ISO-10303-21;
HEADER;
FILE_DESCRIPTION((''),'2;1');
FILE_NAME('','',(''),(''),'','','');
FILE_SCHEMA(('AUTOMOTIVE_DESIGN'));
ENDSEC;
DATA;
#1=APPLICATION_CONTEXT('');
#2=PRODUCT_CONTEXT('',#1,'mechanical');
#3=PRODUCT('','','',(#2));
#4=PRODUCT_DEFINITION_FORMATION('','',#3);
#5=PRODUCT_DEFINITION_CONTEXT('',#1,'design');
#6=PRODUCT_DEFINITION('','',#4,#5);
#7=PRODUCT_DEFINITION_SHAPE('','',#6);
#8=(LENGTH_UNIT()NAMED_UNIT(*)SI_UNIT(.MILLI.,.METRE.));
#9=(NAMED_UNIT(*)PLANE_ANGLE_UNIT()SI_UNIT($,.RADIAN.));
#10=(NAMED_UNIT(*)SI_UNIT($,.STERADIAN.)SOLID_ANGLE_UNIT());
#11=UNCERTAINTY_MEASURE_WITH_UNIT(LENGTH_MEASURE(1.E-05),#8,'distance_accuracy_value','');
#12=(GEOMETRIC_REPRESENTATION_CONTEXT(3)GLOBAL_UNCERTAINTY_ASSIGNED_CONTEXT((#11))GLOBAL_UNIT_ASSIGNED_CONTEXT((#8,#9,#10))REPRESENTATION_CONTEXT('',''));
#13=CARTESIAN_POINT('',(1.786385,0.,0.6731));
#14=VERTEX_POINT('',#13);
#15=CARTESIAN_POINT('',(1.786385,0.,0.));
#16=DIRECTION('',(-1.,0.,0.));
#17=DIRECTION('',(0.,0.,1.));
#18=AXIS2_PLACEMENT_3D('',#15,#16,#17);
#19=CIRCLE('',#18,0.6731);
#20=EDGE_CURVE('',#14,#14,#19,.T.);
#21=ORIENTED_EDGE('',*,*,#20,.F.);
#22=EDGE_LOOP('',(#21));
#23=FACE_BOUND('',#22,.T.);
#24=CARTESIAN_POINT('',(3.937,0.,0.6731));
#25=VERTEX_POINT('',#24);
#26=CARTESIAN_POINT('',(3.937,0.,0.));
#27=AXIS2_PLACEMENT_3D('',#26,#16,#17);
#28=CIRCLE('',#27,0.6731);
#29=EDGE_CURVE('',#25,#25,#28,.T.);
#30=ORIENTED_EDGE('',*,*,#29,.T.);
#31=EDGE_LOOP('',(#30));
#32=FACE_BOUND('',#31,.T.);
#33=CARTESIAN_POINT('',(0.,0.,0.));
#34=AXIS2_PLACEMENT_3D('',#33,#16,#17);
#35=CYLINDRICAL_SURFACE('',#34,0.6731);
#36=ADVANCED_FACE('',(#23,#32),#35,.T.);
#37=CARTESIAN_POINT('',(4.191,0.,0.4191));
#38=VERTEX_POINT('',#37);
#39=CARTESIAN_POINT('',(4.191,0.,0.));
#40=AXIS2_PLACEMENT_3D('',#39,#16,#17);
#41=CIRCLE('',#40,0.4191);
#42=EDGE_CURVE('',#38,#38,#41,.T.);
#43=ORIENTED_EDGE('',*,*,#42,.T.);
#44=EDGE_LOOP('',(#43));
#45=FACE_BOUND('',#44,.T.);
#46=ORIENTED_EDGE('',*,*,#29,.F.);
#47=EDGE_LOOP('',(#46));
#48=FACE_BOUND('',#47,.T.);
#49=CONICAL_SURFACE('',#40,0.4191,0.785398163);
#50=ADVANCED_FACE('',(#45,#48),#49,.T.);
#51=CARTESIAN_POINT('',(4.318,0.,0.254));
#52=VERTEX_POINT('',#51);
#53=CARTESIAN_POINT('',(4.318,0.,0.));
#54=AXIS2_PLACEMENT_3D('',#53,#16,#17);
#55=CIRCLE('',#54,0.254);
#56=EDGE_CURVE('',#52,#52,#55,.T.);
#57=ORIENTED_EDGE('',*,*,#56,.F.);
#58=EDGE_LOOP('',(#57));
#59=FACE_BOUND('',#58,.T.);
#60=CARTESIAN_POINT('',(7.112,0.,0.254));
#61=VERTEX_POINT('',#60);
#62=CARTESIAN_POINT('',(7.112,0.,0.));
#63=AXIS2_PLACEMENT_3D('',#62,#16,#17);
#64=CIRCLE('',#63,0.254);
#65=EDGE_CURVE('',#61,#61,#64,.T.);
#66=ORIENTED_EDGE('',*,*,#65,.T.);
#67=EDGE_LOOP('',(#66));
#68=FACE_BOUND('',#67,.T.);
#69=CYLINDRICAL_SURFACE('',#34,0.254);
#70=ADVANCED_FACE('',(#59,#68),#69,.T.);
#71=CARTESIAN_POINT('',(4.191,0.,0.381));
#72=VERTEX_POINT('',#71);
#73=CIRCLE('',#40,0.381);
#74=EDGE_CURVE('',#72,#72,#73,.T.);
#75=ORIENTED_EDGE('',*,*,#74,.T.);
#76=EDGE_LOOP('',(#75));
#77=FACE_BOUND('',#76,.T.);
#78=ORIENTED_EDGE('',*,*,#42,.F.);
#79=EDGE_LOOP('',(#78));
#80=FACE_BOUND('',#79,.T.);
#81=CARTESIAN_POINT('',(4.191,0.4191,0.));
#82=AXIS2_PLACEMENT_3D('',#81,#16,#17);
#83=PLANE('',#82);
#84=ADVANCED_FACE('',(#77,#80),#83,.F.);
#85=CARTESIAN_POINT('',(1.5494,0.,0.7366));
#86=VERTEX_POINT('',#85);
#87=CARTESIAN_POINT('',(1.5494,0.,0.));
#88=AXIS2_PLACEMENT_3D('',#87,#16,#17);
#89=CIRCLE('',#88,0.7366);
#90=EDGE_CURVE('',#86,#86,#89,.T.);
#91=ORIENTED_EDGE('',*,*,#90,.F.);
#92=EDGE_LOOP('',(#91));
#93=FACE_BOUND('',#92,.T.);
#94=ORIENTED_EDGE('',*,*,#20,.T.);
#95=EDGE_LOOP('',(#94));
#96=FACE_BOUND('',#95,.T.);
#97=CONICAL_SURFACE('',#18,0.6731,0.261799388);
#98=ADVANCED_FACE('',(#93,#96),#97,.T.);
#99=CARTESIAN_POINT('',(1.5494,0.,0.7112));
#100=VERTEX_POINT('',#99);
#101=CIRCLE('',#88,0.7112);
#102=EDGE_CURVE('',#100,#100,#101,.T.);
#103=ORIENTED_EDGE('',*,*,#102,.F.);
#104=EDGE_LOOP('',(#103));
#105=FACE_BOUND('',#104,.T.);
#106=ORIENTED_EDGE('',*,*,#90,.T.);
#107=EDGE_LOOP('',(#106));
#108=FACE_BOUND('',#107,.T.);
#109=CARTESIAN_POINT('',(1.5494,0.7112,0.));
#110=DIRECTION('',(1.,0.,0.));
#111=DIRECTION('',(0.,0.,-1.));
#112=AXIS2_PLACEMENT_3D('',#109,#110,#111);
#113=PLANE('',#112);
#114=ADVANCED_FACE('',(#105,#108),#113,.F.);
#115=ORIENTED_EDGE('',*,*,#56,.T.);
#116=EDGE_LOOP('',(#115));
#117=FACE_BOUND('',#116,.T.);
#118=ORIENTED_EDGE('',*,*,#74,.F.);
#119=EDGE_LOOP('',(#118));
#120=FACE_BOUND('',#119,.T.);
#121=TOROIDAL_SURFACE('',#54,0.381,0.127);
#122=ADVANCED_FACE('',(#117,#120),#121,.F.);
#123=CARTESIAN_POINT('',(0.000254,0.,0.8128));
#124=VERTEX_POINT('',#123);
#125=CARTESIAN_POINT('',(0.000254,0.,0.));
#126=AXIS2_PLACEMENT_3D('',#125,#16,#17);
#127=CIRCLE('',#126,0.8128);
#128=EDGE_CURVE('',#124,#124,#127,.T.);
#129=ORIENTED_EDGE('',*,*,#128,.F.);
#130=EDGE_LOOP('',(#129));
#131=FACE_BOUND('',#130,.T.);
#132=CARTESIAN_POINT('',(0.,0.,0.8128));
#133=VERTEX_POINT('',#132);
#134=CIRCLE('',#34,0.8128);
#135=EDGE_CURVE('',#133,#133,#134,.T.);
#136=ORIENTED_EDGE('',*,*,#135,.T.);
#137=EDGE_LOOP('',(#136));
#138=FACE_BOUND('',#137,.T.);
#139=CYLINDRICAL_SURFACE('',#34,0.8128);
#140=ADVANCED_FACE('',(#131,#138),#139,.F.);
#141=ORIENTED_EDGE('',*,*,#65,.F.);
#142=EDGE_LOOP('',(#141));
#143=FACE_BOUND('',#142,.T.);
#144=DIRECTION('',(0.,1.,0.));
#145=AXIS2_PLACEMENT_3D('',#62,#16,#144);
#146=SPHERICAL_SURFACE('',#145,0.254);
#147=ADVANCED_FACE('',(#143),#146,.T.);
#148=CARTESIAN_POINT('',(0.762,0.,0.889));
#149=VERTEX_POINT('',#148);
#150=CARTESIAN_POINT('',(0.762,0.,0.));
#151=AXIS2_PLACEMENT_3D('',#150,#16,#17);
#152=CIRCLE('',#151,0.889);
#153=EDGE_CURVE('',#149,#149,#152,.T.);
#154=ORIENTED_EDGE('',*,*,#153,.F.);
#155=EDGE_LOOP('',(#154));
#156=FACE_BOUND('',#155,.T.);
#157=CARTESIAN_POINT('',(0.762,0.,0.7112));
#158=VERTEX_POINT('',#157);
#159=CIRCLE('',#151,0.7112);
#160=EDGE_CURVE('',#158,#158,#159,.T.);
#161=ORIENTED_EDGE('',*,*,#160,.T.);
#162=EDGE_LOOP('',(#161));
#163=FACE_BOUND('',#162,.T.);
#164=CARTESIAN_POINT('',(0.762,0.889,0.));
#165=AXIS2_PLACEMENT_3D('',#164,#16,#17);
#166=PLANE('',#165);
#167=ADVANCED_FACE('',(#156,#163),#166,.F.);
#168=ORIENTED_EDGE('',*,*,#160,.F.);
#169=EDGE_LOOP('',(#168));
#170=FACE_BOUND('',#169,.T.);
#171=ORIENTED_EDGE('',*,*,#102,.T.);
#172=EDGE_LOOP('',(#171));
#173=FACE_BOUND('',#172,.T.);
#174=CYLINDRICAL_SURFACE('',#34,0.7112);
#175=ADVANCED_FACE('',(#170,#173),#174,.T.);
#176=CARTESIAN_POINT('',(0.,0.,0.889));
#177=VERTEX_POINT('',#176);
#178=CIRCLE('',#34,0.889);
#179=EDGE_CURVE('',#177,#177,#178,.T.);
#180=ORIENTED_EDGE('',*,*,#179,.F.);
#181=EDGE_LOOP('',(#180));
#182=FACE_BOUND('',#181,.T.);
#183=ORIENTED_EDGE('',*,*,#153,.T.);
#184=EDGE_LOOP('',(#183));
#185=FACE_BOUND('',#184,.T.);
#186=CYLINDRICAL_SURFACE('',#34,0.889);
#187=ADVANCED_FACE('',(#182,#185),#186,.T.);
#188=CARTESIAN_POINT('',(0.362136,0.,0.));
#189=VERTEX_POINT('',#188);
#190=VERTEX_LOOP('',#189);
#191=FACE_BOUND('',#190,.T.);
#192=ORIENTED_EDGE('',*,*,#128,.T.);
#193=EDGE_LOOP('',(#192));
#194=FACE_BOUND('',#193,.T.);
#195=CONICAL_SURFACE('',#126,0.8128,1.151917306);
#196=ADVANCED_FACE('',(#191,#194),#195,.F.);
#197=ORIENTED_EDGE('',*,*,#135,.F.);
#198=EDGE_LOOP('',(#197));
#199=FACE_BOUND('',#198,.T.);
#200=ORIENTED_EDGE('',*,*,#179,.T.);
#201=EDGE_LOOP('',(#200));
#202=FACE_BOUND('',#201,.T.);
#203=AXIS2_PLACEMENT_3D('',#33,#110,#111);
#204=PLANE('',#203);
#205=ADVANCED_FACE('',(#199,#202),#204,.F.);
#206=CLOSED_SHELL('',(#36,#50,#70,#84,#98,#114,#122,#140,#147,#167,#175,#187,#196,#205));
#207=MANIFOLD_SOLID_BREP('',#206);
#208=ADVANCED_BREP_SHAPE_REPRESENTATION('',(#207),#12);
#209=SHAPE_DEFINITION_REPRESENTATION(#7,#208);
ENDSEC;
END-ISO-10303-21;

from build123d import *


# Read off the part's stored shape, not the designer's step: Hole1
with BuildPart() as part:
    # Sketch1 → RevolutionAngle1 (revolve)
    with BuildSketch(Plane.XY, mode=Mode.PRIVATE) as revolutionangle1_sk:
        with BuildLine():
            Line((4.191, 0.4191), (4.191, 0.381))
            ThreePointArc((4.191, 0.381), (4.228197439, 0.291197439), (4.318, 0.254))
            Line((4.318, 0.254), (7.112, 0.254))
            ThreePointArc((7.112, 0.254), (7.291605122, 0.179605122), (7.366, 0))
            Line((7.366, 0), (0, 0))
            Line((0, 0), (0, 0.889))
            Line((0, 0.889), (0.762, 0.889))
            Line((0.762, 0.889), (0.762, 0.7112))
            Line((0.762, 0.7112), (1.5494, 0.7112))
            Line((1.5494, 0.7112), (1.5494, 0.7366))
            Line((1.5494, 0.7366), (1.786385226, 0.6731))
            Line((1.786385226, 0.6731), (3.937, 0.6731))
            Line((3.937, 0.6731), (4.191, 0.4191))
        make_face()
    revolve(revolutionangle1_sk.sketch.rotate(Axis((0, 0, 0), (1, 0, 0)), 90), axis=Axis((0, 0, 0), (1, 0, 0)))

    # Hole1 outline → Hole1 (revolve, cut)
    with BuildSketch(Plane.YX):
        Polygon((0.8128, 0.000254), (0, 0.362135875), (0, 0), (0.8128, 0), align=None)
    revolve(axis=Axis((0, 0, 0), (1, 0, 0)), mode=Mode.SUBTRACT)


solid = part.part
